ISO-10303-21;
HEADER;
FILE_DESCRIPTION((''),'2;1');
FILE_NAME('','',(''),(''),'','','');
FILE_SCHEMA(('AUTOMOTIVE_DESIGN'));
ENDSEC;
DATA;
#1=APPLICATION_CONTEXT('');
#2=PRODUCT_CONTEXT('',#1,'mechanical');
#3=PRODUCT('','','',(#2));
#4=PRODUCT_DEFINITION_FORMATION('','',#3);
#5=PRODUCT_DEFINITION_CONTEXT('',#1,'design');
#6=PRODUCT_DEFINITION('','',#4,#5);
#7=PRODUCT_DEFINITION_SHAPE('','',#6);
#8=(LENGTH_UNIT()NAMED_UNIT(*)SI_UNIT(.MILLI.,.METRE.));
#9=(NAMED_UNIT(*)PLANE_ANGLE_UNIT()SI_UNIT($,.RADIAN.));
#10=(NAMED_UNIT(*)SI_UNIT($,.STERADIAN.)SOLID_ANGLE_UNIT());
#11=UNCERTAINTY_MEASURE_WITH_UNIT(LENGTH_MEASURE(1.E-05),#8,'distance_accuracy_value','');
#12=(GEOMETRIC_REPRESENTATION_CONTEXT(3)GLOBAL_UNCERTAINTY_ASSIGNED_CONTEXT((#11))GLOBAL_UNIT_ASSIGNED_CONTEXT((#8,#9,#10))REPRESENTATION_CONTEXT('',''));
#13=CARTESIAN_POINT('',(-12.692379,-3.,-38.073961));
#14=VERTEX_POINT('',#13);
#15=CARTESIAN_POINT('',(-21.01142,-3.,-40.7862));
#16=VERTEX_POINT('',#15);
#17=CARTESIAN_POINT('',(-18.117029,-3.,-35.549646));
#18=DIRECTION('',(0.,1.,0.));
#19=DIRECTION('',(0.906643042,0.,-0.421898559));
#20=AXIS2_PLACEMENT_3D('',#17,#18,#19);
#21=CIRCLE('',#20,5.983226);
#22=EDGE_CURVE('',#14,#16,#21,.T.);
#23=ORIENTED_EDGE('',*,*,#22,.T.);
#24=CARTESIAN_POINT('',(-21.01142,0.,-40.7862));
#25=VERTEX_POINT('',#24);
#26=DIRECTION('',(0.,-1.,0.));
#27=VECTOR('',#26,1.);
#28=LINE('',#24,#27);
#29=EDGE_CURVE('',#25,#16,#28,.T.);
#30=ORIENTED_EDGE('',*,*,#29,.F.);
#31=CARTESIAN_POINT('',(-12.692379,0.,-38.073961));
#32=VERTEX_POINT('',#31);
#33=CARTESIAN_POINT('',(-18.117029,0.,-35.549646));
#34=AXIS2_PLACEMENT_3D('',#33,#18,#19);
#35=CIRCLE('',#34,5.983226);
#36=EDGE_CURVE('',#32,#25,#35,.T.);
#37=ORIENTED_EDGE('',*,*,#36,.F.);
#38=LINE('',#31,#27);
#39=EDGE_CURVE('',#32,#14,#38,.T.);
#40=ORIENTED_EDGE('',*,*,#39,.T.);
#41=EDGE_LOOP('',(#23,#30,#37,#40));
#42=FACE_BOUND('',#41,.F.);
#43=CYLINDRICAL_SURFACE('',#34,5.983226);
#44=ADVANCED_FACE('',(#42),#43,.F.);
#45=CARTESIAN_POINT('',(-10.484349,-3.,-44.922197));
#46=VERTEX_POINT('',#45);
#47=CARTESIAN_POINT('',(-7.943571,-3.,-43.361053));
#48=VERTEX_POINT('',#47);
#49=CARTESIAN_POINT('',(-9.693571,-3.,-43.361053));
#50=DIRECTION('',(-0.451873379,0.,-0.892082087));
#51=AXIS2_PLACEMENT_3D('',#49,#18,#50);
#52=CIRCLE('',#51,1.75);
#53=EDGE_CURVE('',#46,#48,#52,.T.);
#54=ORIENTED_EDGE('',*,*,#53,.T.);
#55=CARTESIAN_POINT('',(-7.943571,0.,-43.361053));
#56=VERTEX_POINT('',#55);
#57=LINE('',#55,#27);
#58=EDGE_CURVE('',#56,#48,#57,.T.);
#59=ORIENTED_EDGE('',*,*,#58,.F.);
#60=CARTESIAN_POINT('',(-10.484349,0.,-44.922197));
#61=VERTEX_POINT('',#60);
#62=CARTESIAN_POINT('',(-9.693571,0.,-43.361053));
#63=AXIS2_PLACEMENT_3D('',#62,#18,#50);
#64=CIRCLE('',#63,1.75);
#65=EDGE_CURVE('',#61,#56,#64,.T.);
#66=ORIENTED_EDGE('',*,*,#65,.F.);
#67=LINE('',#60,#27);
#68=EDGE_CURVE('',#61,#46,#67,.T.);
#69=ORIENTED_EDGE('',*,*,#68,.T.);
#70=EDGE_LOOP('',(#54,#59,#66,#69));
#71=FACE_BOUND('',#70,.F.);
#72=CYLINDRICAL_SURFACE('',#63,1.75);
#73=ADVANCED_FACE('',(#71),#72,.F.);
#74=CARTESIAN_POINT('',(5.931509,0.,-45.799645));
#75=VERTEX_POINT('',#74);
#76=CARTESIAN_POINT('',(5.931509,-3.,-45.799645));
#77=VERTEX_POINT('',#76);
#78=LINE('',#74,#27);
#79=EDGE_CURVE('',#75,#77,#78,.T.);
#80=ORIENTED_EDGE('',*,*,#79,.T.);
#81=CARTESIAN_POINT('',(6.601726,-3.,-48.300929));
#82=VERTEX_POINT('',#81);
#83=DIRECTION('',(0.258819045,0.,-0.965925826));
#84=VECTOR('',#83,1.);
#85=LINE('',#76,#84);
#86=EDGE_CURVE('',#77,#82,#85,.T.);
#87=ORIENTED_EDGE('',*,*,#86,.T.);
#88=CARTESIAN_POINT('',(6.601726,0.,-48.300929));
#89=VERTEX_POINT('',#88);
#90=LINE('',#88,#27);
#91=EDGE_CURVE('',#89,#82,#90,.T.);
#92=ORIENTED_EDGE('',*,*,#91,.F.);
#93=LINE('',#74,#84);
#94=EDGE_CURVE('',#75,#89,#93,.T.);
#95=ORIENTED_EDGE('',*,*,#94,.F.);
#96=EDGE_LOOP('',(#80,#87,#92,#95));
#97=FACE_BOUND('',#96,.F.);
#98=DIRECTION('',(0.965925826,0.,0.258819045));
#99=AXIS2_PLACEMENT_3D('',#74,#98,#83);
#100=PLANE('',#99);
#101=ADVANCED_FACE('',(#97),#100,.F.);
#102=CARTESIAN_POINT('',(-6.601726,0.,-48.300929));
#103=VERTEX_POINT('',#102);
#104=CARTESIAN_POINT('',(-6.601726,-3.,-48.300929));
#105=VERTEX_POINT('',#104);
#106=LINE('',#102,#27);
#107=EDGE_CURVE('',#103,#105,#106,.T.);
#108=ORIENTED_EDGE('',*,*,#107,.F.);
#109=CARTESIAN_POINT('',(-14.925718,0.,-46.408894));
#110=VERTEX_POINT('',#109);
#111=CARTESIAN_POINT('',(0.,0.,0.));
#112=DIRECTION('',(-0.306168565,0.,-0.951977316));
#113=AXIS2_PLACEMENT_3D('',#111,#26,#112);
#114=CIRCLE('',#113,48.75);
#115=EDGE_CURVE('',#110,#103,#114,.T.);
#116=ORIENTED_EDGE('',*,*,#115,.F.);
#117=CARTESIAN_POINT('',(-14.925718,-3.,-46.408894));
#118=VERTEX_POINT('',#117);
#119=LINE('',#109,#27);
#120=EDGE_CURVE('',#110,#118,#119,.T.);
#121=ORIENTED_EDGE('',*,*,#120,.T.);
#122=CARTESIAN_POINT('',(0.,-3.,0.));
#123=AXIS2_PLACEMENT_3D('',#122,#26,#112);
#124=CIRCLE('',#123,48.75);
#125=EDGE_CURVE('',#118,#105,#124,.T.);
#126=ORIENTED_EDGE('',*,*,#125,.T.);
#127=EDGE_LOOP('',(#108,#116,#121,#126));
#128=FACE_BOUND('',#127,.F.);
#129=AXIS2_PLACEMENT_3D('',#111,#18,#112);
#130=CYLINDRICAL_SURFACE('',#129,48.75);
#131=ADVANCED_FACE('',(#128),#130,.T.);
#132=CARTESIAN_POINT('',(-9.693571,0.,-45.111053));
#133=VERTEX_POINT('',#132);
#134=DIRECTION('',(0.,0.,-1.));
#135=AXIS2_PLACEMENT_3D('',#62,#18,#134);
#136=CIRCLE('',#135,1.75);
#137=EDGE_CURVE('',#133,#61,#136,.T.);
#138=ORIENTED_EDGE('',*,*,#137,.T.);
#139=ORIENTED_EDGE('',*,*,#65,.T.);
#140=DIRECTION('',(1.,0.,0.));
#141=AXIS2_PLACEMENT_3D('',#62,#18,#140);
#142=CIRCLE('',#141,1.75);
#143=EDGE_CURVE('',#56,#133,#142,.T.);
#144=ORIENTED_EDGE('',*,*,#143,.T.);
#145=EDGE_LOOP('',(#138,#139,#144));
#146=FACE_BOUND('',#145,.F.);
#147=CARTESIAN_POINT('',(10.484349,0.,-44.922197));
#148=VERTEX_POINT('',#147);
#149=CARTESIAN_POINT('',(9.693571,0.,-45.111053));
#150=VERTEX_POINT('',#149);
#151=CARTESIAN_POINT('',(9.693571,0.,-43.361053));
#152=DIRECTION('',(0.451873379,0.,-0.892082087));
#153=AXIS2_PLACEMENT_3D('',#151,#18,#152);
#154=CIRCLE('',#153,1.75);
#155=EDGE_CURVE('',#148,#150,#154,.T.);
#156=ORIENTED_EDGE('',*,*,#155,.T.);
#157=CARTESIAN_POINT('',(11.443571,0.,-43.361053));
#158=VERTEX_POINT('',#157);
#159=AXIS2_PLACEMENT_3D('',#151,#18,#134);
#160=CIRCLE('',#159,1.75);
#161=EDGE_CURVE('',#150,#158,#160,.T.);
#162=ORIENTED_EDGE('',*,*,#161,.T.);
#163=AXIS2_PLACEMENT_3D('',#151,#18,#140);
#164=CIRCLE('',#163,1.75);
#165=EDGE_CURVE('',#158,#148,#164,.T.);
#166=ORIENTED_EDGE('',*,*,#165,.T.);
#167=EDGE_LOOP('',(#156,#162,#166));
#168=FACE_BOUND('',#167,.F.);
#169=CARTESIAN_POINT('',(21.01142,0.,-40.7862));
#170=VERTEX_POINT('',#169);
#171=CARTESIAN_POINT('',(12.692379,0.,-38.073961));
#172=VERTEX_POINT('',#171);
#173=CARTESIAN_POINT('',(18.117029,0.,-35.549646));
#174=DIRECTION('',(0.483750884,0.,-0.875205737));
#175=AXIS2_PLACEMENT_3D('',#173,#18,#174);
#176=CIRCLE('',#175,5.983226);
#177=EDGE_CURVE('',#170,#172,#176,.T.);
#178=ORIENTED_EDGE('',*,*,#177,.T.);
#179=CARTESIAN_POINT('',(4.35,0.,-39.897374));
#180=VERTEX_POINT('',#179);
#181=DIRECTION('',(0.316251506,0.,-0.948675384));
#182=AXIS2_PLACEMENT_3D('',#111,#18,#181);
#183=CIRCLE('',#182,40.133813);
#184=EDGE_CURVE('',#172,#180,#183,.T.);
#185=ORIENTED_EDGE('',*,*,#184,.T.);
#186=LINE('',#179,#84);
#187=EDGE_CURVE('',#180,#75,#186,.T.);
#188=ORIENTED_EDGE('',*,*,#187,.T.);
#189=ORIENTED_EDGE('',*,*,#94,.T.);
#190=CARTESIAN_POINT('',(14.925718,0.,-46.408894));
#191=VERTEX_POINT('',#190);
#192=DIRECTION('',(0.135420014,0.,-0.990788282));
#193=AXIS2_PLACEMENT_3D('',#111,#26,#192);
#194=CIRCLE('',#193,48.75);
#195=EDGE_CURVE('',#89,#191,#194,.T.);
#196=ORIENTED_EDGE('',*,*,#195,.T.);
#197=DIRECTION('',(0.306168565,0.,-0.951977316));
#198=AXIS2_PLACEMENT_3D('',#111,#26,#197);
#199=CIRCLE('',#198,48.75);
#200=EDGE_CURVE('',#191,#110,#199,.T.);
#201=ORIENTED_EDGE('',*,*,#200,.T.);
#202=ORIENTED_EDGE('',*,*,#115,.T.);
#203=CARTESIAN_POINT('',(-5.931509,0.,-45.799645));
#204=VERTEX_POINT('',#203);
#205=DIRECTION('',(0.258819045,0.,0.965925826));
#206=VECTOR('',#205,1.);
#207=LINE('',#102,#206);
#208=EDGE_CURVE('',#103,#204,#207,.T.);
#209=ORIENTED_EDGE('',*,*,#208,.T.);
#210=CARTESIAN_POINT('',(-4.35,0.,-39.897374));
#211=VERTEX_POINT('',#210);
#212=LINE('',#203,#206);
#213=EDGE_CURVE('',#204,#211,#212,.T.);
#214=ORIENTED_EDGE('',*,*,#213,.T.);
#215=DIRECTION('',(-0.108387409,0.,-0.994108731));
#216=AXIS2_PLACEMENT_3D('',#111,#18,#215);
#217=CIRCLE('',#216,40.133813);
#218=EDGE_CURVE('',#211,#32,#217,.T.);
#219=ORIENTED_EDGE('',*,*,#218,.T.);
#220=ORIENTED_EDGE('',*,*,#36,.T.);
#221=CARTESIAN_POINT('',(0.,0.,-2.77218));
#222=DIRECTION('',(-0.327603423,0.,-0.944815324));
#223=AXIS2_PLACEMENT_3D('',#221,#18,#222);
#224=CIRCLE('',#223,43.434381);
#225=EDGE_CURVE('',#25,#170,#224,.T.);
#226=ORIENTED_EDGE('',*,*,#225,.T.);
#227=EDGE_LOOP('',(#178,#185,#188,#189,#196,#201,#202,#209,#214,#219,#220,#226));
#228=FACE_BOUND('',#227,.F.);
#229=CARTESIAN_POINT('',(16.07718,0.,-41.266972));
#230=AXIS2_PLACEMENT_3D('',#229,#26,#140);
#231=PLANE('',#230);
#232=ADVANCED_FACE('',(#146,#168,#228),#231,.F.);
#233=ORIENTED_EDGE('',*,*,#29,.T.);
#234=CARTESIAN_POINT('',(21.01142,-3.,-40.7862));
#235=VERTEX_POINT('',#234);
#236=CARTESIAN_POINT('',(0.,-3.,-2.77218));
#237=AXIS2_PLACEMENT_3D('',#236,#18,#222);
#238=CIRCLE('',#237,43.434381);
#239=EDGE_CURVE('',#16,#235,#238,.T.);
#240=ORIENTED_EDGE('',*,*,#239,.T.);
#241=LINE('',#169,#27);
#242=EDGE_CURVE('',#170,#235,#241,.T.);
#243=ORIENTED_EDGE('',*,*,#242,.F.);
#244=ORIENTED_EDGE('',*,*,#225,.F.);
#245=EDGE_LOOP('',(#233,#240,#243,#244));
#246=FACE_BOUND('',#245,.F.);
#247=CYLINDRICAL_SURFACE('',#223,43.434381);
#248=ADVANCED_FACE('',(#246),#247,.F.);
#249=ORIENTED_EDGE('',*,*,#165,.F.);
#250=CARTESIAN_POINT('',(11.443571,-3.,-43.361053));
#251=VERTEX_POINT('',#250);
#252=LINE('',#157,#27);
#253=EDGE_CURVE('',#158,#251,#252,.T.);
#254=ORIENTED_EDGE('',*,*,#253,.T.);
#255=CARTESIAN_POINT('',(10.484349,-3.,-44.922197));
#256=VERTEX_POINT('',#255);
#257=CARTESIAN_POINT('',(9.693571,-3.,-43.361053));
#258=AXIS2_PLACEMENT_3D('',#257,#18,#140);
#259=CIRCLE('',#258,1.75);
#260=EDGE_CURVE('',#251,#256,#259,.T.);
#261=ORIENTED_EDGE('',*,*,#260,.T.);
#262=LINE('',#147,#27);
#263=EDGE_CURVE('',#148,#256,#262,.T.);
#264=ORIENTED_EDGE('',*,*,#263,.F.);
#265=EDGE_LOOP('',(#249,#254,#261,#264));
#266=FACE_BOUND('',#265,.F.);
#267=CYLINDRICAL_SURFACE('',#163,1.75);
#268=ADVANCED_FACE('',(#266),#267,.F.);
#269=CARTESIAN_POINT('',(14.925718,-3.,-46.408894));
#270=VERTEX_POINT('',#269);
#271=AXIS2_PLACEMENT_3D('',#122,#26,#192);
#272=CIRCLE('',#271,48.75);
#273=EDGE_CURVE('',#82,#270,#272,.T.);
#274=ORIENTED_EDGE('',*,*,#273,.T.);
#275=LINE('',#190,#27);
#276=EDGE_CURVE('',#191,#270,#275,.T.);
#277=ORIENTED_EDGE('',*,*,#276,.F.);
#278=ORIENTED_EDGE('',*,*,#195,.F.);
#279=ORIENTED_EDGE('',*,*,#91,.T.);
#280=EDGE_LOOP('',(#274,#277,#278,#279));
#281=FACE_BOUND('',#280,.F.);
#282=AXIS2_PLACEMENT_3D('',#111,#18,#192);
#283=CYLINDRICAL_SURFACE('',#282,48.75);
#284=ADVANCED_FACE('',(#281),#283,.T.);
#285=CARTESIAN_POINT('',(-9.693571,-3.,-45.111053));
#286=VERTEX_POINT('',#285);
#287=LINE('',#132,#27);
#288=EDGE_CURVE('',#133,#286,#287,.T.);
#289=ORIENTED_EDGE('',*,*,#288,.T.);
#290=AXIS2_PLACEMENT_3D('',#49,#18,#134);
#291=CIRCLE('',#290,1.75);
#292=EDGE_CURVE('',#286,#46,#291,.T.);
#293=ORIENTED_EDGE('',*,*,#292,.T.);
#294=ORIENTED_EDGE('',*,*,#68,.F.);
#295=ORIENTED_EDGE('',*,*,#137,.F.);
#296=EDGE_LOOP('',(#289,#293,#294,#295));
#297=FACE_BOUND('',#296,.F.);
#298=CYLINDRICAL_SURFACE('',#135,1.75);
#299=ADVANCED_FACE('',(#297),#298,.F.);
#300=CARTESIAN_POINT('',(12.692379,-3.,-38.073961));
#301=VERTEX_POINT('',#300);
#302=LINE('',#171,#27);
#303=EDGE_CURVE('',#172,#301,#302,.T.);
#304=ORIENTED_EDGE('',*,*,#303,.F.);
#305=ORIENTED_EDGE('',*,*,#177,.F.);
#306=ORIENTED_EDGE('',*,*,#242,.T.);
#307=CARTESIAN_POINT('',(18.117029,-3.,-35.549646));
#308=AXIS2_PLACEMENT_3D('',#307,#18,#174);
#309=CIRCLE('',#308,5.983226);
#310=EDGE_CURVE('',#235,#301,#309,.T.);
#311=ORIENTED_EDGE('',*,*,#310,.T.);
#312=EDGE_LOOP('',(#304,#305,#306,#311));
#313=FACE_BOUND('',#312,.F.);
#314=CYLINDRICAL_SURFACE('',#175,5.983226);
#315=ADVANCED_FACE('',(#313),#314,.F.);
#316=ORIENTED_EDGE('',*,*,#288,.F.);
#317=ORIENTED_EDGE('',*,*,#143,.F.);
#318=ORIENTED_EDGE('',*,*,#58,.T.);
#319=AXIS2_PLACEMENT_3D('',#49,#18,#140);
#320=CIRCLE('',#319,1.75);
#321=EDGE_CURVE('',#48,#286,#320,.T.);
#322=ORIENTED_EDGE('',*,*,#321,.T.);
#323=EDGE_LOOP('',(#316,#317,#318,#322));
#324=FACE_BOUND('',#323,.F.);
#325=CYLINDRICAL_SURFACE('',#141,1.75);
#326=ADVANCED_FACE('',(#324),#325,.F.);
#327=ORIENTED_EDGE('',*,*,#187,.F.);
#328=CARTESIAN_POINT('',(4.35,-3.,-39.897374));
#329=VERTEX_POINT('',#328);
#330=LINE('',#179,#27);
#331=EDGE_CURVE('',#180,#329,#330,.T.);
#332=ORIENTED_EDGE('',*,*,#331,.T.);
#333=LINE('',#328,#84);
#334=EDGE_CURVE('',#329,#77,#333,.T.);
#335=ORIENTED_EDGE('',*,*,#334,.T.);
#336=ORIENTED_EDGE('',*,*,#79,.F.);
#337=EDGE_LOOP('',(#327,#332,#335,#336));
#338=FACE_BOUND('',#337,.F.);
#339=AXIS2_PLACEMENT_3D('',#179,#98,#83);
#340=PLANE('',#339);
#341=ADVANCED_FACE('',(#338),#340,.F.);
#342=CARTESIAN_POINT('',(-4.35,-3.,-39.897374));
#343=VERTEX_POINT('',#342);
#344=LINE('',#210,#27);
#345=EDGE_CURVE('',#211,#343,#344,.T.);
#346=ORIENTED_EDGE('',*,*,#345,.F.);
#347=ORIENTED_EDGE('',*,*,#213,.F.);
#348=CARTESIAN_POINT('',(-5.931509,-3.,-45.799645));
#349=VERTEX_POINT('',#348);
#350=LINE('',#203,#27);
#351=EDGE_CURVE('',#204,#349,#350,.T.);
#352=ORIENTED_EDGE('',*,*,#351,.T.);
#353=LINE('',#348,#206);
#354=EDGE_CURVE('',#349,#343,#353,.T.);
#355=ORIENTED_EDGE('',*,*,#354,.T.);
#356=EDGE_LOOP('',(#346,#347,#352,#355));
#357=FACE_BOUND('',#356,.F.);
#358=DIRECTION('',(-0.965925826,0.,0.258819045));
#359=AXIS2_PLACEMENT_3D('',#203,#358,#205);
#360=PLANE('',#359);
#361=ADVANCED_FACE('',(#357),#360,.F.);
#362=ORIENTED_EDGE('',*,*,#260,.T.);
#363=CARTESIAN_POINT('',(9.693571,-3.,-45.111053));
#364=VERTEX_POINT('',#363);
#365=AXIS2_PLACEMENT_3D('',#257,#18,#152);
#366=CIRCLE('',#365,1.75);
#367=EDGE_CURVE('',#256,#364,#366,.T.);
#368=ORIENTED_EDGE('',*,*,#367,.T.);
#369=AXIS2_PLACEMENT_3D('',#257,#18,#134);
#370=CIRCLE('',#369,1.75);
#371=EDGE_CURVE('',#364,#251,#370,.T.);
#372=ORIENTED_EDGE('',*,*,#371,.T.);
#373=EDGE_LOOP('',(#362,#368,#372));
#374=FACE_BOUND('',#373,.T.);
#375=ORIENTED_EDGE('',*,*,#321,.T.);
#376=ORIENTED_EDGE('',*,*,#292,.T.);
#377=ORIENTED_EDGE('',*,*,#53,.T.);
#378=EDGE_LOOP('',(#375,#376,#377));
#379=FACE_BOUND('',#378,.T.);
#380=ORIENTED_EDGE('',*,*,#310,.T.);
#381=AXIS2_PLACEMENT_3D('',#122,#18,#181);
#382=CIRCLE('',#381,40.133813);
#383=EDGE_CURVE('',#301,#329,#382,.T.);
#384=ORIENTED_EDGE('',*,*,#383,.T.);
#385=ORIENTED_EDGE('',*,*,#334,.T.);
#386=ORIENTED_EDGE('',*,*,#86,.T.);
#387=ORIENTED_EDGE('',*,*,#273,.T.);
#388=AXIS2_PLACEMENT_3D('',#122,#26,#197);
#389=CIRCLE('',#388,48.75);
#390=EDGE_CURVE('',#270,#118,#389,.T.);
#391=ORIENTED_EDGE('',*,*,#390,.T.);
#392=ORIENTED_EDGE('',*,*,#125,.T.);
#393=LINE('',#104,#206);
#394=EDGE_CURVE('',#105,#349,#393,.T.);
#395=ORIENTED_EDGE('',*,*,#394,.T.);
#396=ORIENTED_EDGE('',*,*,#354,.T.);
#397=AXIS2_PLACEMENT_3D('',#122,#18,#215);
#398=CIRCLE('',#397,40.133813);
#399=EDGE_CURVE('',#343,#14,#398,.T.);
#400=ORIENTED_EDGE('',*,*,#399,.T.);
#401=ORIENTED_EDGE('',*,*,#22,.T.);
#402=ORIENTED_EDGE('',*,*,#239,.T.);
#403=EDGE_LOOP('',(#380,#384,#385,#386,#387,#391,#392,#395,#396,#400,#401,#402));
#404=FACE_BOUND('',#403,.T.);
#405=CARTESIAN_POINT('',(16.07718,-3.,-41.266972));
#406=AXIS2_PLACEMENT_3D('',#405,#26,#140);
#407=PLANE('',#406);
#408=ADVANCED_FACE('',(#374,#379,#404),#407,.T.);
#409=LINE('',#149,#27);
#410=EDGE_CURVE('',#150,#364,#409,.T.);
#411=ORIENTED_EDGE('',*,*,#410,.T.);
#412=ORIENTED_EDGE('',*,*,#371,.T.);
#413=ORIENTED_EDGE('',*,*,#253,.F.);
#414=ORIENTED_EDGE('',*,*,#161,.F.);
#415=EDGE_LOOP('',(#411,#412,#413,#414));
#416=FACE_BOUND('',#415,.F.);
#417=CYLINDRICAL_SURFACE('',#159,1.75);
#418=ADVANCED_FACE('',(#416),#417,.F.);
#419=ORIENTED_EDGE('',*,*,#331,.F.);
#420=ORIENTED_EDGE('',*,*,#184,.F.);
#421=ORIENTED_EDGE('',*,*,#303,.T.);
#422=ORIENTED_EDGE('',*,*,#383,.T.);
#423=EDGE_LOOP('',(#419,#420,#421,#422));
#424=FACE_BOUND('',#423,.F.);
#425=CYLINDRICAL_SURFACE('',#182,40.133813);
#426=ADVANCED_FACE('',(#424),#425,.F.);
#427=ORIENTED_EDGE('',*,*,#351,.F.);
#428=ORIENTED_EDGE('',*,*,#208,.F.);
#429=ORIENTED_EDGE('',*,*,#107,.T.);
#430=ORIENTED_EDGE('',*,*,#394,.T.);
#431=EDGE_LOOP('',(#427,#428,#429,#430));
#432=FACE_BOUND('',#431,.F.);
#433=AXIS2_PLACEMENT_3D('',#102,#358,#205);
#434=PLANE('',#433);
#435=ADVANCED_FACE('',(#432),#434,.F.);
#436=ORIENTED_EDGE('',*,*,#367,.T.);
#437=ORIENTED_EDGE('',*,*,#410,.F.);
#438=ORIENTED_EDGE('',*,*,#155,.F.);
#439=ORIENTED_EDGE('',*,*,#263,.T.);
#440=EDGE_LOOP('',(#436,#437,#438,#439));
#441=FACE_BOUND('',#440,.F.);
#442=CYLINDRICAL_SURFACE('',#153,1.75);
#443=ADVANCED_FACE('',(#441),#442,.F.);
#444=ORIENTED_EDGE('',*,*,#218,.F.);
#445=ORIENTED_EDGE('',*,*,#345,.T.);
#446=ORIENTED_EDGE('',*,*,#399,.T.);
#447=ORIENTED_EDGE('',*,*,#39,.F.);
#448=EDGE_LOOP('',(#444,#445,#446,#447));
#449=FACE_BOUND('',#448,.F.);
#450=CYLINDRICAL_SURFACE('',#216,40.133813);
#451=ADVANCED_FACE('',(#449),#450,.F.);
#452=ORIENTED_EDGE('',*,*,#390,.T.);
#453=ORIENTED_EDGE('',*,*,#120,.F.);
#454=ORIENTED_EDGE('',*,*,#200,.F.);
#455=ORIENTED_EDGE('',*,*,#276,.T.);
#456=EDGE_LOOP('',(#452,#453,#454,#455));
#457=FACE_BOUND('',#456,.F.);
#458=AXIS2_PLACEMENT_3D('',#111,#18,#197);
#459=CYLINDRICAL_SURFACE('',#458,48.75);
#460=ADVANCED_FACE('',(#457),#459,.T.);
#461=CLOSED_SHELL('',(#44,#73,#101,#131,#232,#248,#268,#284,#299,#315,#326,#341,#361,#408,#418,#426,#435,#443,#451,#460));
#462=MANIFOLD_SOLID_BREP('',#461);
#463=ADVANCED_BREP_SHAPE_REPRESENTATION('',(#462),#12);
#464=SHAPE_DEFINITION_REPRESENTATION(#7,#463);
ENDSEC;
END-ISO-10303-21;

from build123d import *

# Parameters (mm, degrees)
F1_DEPTH    = 3
F2_T1_DEPTH = 3


# Not quite as in the source:
# - a fillet or chamfer that OpenCascade refuses, or shapes differently, is made with other operations: its cross-section is extruded or revolved along the edge and cut away or added


with BuildPart() as f1:
    # F0 (on Front) → F1 (new body)
    with BuildSketch(Plane.XZ):
        with BuildLine():
            Line((-12.6923788449, -38.0739606037), (-14.2292520278, -43.8096494069))
            ThreePointArc((-14.2292520278, -43.8096494069), (-12.3693152355, -44.4080485447), (-10.4843489922, -44.9221970263))
            ThreePointArc((-10.4843489922, -44.9221970263), (-10.6097140662, -41.870019803), (-7.9435705793, -43.3610533745))
            ThreePointArc((-7.9435705793, -43.3610533745), (-8.4561337122, -44.5984902415), (-9.6935705793, -45.1110533745))
            ThreePointArc((-9.6935705793, -45.1110533745), (-7.8201224186, -45.4967770693), (-5.9315086401, -45.7996446565))
            Line((-5.9315086401, -45.7996446565), (-4.35, -39.8973740589))
            ThreePointArc((-4.35, -39.8973740589), (-8.5698237047, -39.2081761686), (-12.6923788449, -38.0739606037))
        make_face()
        with BuildLine():
            Line((-14.2292520278, -43.8096494069), (-14.9257175554, -46.4088941417))
            ThreePointArc((-14.9257175554, -46.4088941417), (-10.8052141087, -47.537457316), (-6.6017256924, -48.3009287476))
            Line((-6.6017256924, -48.3009287476), (-5.9315086401, -45.7996446565))
            ThreePointArc((-5.9315086401, -45.7996446565), (-7.8201224186, -45.4967770693), (-9.6935705793, -45.1110533745))
            ThreePointArc((-9.6935705793, -45.1110533745), (-10.1000792565, -45.063184596), (-10.4843489922, -44.9221970263))
            ThreePointArc((-10.4843489922, -44.9221970263), (-12.3693152355, -44.4080485447), (-14.2292520278, -43.8096494069))
        make_face()
        with BuildLine():
            ThreePointArc((14.9257175554, -46.4088941417), (39.3966447228, -28.7135313848), (48.75, 0))
            ThreePointArc((48.75, 0), (-28.7135313848, 39.3966447228), (-14.9257175554, -46.4088941417))
            Line((-14.9257175554, -46.4088941417), (-14.2292520278, -43.8096494069))
            ThreePointArc((-14.2292520278, -43.8096494069), (-25.1843873236, 32.6155595225), (43.434381424, -2.7721802304))
            ThreePointArc((43.434381424, -2.7721802304), (35.3877397529, -27.956567554), (14.2292520278, -43.8096494069))
            Line((14.2292520278, -43.8096494069), (14.9257175554, -46.4088941417))
        make_face()
        with BuildLine():
            ThreePointArc((10.4843489922, -44.9221970263), (12.3693152355, -44.4080485447), (14.2292520278, -43.8096494069))
            Line((14.2292520278, -43.8096494069), (12.6923788449, -38.0739606037))
            ThreePointArc((12.6923788449, -38.0739606037), (8.5698237047, -39.2081761686), (4.35, -39.8973740589))
            Line((4.35, -39.8973740589), (5.9315086401, -45.7996446565))
            ThreePointArc((5.9315086401, -45.7996446565), (7.8201224186, -45.4967770693), (9.6935705793, -45.1110533745))
            ThreePointArc((9.6935705793, -45.1110533745), (8.4561337122, -42.1236165074), (11.4435705793, -43.3610533745))
            ThreePointArc((11.4435705793, -43.3610533745), (11.1846041508, -44.2771968614), (10.4843489922, -44.9221970263))
        make_face()
        with BuildLine():
            ThreePointArc((6.6017256924, -48.3009287476), (10.8052141087, -47.537457316), (14.9257175554, -46.4088941417))
            Line((14.9257175554, -46.4088941417), (14.2292520278, -43.8096494069))
            ThreePointArc((14.2292520278, -43.8096494069), (12.3693152355, -44.4080485447), (10.4843489922, -44.9221970263))
            ThreePointArc((10.4843489922, -44.9221970263), (10.1000792565, -45.063184596), (9.6935705793, -45.1110533745))
            ThreePointArc((9.6935705793, -45.1110533745), (7.8201224186, -45.4967770693), (5.9315086401, -45.7996446565))
            Line((5.9315086401, -45.7996446565), (6.6017256924, -48.3009287476))
        make_face()
    extrude(amount=F1_DEPTH)

    # F2: fillet of radius 5.9832263303 on 2 edges, made by hand

    # F2_s2 → F2_t1 (join)
    with BuildSketch(Plane.XZ):
        with BuildLine():
            ThreePointArc((21.0114203914, -40.7862000497), (16.2624097338, -41.2381768967), (12.6923788449, -38.0739606037))
            Line((12.6923788449, -38.0739606037), (12.5838858344, -38.124446895))
            ThreePointArc((12.5838858344, -38.124446895), (13.3452283796, -40.9727764638), (14.113664971, -43.8406208654))
            Line((14.113664971, -43.8406208654), (14.2684545363, -43.9227102855))
            ThreePointArc((14.2684545363, -43.9227102855), (17.7337895054, -42.5524219145), (21.0693082118, -40.8909311299))
            Line((21.0693082118, -40.8909311299), (21.0114203914, -40.7862000497))
        make_face()
        with BuildLine():
            ThreePointArc((-12.6923788449, -38.0739606037), (-16.2624097338, -41.2381768967), (-21.0114203914, -40.7862000497))
            Line((-21.0114203914, -40.7862000497), (-21.0693082118, -40.8909311299))
            ThreePointArc((-21.0693082118, -40.8909311299), (-17.7337895054, -42.5524219145), (-14.2684545363, -43.9227102855))
            Line((-14.2684545363, -43.9227102855), (-14.113664971, -43.8406208654))
            ThreePointArc((-14.113664971, -43.8406208654), (-13.3452283796, -40.9727764638), (-12.5838858345, -38.124446895))
            Line((-12.5838858345, -38.124446895), (-12.6923788449, -38.0739606037))
        make_face()
    extrude(amount=F2_T1_DEPTH)


solid = f1.part
